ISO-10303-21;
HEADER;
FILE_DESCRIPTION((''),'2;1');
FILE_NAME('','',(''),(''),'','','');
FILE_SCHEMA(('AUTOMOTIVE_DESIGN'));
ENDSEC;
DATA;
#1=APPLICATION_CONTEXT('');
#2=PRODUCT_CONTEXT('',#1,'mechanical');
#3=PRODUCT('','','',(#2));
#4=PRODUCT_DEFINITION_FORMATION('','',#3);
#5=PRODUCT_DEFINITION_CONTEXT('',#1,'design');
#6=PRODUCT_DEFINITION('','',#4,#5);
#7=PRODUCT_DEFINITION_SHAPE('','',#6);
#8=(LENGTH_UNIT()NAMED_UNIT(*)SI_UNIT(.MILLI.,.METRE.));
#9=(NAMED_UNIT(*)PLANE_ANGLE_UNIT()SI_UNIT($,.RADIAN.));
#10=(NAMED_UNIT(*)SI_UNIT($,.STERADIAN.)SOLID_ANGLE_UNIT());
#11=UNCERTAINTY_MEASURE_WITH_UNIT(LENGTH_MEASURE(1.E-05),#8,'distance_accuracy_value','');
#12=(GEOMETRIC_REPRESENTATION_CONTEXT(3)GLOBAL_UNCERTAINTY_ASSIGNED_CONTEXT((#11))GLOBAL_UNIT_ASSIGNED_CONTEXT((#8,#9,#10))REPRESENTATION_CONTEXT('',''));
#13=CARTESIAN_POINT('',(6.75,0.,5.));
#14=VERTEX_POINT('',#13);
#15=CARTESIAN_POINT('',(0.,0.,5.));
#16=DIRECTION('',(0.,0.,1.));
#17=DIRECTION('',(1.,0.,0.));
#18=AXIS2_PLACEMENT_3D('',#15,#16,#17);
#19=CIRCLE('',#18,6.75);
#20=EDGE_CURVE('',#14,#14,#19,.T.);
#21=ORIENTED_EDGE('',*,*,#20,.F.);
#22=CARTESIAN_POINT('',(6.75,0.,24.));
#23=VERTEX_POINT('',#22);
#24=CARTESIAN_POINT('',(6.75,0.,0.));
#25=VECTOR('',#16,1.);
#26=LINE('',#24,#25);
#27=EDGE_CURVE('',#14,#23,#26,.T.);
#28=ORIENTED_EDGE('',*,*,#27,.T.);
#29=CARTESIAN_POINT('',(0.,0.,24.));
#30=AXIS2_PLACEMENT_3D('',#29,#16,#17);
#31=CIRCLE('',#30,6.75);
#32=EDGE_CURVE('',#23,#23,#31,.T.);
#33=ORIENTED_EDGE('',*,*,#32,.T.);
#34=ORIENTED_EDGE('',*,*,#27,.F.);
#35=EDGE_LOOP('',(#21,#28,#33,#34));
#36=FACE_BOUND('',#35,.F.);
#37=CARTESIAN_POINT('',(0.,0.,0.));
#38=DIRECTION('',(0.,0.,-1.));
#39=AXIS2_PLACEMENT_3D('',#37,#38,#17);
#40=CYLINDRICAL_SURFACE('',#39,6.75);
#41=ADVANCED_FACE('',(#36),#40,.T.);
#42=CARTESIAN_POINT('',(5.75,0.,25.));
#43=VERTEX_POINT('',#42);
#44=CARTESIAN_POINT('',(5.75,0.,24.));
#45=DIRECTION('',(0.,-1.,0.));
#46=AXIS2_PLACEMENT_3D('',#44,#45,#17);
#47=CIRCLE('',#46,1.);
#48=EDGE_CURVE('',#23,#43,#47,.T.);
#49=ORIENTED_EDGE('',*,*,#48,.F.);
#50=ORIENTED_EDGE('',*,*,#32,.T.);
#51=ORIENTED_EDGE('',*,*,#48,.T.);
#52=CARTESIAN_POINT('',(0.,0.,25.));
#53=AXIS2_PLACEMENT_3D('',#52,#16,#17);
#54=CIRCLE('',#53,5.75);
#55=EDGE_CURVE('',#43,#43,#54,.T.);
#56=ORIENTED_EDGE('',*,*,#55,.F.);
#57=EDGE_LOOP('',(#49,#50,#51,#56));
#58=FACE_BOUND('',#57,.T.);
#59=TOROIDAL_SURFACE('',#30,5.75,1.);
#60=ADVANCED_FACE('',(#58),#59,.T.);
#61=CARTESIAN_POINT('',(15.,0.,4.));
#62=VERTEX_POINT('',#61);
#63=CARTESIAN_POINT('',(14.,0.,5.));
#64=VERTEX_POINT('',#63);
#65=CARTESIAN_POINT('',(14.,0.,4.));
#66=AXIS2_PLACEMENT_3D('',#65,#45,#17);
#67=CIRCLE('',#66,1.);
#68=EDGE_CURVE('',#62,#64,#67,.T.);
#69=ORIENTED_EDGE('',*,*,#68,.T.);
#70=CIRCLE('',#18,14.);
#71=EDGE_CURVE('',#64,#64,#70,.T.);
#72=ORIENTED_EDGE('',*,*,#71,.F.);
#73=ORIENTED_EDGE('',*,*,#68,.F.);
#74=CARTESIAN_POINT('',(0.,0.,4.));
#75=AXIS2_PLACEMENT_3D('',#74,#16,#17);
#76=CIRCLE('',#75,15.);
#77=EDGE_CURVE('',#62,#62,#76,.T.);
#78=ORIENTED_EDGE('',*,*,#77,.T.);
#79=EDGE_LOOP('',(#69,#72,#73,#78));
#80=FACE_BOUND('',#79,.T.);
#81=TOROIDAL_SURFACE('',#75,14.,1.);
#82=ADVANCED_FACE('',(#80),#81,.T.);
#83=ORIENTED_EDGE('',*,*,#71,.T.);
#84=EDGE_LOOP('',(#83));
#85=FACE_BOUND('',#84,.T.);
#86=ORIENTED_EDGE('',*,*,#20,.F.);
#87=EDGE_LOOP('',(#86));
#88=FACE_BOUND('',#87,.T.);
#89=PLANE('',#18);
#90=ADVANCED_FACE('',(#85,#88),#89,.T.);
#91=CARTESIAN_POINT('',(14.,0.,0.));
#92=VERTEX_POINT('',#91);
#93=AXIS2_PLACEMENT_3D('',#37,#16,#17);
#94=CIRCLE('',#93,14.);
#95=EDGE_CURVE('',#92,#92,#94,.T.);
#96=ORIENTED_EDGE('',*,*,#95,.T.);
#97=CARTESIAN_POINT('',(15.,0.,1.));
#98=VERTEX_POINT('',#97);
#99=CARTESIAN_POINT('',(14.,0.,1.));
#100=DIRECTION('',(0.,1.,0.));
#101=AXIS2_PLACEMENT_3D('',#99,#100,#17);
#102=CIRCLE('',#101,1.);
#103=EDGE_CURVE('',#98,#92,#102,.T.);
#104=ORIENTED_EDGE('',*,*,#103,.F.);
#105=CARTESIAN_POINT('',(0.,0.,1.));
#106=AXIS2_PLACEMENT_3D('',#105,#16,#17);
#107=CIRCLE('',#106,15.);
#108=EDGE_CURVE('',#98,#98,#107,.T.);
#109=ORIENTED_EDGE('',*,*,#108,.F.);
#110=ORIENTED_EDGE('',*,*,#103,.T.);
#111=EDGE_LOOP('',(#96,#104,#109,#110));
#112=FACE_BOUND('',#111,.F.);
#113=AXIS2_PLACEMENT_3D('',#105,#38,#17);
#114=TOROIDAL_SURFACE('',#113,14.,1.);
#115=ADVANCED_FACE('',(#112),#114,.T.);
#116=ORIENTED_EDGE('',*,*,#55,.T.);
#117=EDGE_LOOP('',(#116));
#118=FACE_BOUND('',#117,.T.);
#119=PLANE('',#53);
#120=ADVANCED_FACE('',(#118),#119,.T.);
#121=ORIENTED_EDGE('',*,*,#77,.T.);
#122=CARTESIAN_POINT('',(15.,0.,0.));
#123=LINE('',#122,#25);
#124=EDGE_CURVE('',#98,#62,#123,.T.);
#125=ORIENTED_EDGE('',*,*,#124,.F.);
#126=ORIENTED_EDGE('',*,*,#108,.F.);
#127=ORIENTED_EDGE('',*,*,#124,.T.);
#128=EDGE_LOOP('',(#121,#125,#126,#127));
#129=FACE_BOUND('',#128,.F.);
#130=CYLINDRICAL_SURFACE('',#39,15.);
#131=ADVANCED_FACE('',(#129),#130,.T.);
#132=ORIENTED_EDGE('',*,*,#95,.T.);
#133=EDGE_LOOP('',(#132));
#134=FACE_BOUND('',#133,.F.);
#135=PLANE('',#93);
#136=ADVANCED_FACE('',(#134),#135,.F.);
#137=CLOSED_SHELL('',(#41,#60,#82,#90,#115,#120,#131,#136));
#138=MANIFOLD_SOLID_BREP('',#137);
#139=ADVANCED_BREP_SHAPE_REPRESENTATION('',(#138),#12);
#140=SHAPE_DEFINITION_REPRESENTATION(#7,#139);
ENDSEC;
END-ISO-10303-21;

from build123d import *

# Parameters (mm, degrees)
F0_R     = 6.75
F1_DEPTH = 25
F0_R_2   = 15
F2_DEPTH = 5
F3_R     = 1


with BuildPart() as f1:
    # F0 (on Top) → F1 (new body)
    with BuildSketch(Plane.XY):
        Circle(F0_R)
    extrude(amount=F1_DEPTH)

    # F0 (on Top) → F2 (join)
    with BuildSketch(Plane.XY):
        Circle(F0_R_2)
        Circle(F0_R, mode=Mode.SUBTRACT)
    extrude(amount=F2_DEPTH)

    # F3
    f3_edges = [f1.edges().sort_by_distance(p)[0] for p in [
        (-15, 0, 0),
        (-15, 0, 5),
        (-6.75, 0, 25),
    ]]
    fillet(f3_edges, radius=F3_R)


solid = f1.part
